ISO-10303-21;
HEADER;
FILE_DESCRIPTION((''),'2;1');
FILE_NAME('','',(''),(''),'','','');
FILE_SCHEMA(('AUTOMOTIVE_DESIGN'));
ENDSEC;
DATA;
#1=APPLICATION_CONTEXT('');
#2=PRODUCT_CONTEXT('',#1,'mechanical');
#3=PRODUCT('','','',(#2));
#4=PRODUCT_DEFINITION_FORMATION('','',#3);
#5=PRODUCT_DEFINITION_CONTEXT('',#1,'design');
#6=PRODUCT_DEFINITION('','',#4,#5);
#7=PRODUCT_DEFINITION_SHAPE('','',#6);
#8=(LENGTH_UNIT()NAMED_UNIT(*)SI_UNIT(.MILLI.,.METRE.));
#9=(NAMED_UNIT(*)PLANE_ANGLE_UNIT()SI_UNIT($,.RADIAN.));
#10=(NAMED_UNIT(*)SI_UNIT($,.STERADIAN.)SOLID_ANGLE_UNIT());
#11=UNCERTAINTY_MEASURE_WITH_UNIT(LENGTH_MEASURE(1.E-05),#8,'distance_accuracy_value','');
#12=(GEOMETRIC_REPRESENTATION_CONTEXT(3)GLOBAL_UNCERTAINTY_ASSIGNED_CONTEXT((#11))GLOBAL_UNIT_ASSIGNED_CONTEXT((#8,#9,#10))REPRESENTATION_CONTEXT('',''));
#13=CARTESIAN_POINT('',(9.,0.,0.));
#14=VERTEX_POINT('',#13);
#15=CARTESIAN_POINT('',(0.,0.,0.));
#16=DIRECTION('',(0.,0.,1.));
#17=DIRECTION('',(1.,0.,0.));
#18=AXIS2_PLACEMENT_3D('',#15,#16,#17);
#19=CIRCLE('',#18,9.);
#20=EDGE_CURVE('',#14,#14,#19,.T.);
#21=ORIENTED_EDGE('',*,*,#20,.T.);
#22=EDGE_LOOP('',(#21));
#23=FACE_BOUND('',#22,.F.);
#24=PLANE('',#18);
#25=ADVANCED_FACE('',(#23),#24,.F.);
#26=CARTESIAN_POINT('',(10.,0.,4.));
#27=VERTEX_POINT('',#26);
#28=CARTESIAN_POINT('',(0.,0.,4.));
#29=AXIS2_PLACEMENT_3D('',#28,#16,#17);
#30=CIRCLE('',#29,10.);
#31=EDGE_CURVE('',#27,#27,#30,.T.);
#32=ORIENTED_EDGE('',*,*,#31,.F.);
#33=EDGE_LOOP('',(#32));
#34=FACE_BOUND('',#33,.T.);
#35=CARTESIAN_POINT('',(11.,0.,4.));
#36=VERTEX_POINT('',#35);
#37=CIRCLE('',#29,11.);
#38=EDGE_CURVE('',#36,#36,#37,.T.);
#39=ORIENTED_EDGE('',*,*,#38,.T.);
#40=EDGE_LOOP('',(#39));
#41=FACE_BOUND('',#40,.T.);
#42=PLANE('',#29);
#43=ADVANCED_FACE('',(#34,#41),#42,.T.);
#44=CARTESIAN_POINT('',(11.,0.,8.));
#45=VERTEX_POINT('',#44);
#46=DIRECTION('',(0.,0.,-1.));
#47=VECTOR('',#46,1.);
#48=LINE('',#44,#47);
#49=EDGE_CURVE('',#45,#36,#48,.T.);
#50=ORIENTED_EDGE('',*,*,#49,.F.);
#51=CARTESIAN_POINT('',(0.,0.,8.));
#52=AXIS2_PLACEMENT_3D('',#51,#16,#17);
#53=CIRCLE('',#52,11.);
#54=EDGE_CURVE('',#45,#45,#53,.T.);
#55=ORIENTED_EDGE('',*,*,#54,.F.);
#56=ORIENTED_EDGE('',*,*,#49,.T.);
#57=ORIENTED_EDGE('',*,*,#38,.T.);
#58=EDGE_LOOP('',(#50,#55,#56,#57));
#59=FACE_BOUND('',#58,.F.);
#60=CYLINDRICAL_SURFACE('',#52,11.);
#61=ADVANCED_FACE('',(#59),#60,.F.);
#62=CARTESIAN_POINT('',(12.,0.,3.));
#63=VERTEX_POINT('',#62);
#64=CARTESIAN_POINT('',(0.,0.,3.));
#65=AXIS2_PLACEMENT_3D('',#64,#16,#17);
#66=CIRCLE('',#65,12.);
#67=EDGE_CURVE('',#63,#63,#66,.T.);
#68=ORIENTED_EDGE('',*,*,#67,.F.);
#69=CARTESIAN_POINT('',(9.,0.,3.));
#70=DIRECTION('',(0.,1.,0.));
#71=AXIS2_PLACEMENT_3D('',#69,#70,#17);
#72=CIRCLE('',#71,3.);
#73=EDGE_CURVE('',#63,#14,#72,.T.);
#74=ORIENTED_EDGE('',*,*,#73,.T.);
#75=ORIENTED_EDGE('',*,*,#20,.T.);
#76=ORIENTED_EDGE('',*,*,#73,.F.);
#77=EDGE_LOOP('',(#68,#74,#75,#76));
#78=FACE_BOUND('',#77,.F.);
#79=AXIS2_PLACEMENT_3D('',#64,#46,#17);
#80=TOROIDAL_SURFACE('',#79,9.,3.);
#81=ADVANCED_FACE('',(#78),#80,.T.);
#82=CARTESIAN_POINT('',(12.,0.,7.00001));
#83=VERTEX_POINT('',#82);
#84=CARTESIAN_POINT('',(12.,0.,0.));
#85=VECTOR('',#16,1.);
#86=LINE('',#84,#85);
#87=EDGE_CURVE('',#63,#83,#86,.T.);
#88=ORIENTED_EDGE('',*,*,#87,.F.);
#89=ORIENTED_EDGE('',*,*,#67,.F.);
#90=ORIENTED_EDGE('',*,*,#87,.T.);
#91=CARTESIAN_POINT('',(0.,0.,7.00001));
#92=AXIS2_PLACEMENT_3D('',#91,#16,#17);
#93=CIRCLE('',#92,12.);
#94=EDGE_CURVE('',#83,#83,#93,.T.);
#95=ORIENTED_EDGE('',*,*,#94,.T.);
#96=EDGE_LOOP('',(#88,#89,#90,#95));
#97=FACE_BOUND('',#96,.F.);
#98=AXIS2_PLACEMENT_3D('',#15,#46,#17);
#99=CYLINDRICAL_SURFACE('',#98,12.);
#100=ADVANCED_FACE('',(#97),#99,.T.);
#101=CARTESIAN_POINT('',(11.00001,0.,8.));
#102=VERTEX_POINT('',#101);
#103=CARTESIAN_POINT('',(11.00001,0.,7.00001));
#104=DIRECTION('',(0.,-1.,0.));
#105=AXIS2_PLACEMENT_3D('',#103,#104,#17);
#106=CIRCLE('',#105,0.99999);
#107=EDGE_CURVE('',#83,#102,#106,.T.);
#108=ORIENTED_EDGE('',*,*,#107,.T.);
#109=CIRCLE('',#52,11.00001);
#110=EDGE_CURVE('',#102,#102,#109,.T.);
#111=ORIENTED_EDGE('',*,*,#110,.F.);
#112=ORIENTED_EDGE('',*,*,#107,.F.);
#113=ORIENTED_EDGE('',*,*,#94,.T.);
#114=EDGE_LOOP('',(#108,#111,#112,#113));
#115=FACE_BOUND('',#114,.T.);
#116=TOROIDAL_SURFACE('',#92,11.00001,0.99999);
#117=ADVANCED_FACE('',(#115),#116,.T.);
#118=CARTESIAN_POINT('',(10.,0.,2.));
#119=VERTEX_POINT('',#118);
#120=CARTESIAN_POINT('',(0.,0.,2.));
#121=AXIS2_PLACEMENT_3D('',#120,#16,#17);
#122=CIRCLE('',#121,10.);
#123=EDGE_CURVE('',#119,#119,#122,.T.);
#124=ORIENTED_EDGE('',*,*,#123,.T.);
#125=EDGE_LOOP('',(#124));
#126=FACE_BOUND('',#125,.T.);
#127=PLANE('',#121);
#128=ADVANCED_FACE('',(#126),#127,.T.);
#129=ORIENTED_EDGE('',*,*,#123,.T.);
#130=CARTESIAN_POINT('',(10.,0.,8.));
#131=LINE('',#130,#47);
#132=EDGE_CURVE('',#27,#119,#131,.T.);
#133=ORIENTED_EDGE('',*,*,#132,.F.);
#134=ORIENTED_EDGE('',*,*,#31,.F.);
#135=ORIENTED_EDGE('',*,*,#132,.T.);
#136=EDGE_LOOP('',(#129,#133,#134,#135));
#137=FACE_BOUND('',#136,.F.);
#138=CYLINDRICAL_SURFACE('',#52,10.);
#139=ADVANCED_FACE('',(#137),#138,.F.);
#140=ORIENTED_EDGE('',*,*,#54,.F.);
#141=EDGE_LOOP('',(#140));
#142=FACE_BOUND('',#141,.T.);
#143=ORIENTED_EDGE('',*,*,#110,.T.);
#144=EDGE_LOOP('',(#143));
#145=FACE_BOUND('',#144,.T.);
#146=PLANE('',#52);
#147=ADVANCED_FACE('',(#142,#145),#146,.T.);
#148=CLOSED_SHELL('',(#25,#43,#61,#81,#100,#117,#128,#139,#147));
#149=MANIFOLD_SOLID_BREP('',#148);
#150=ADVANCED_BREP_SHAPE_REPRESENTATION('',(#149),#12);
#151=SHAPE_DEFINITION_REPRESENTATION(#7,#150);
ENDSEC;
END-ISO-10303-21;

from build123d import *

# Parameters (mm, degrees)
F0_R     = 12
F1_DEPTH = 8
F2_R     = 10
F3_DEPTH = 6
F2_R_2   = 11
F4_DEPTH = 4
F5_R     = 3
F6_R     = 0.99999


# Not quite as in the source:
# - a fillet or chamfer is up to 0.001 mm smaller than in the source, because OpenCascade refuses the exact size


with BuildPart() as f1:
    # F0 (on Top) → F1 (new body)
    with BuildSketch(Plane.XY):
        Circle(F0_R)
    extrude(amount=F1_DEPTH)

    # F2 (on face) → F3 (cut)
    with BuildSketch(Plane.XY.offset(8)):
        Circle(F2_R)
    extrude(amount=-F3_DEPTH, mode=Mode.SUBTRACT)

    # F2 (on face) → F4 (cut)
    with BuildSketch(Plane.XY.offset(8)):
        Circle(F2_R_2)
        Circle(F2_R, mode=Mode.SUBTRACT)
    extrude(amount=-F4_DEPTH, mode=Mode.SUBTRACT)

    # F5
    f5_edges = [f1.edges().sort_by_distance(p)[0] for p in [
        (-12, 0, 0),
    ]]
    fillet(f5_edges, radius=F5_R)

    # F6 (radius 1 in the source; OpenCascade refuses exactly that, so slightly less here)
    f6_edges = [f1.edges().sort_by_distance(p)[0] for p in [
        (-12, 0, 8),
    ]]
    fillet(f6_edges, radius=F6_R)


solid = f1.part
